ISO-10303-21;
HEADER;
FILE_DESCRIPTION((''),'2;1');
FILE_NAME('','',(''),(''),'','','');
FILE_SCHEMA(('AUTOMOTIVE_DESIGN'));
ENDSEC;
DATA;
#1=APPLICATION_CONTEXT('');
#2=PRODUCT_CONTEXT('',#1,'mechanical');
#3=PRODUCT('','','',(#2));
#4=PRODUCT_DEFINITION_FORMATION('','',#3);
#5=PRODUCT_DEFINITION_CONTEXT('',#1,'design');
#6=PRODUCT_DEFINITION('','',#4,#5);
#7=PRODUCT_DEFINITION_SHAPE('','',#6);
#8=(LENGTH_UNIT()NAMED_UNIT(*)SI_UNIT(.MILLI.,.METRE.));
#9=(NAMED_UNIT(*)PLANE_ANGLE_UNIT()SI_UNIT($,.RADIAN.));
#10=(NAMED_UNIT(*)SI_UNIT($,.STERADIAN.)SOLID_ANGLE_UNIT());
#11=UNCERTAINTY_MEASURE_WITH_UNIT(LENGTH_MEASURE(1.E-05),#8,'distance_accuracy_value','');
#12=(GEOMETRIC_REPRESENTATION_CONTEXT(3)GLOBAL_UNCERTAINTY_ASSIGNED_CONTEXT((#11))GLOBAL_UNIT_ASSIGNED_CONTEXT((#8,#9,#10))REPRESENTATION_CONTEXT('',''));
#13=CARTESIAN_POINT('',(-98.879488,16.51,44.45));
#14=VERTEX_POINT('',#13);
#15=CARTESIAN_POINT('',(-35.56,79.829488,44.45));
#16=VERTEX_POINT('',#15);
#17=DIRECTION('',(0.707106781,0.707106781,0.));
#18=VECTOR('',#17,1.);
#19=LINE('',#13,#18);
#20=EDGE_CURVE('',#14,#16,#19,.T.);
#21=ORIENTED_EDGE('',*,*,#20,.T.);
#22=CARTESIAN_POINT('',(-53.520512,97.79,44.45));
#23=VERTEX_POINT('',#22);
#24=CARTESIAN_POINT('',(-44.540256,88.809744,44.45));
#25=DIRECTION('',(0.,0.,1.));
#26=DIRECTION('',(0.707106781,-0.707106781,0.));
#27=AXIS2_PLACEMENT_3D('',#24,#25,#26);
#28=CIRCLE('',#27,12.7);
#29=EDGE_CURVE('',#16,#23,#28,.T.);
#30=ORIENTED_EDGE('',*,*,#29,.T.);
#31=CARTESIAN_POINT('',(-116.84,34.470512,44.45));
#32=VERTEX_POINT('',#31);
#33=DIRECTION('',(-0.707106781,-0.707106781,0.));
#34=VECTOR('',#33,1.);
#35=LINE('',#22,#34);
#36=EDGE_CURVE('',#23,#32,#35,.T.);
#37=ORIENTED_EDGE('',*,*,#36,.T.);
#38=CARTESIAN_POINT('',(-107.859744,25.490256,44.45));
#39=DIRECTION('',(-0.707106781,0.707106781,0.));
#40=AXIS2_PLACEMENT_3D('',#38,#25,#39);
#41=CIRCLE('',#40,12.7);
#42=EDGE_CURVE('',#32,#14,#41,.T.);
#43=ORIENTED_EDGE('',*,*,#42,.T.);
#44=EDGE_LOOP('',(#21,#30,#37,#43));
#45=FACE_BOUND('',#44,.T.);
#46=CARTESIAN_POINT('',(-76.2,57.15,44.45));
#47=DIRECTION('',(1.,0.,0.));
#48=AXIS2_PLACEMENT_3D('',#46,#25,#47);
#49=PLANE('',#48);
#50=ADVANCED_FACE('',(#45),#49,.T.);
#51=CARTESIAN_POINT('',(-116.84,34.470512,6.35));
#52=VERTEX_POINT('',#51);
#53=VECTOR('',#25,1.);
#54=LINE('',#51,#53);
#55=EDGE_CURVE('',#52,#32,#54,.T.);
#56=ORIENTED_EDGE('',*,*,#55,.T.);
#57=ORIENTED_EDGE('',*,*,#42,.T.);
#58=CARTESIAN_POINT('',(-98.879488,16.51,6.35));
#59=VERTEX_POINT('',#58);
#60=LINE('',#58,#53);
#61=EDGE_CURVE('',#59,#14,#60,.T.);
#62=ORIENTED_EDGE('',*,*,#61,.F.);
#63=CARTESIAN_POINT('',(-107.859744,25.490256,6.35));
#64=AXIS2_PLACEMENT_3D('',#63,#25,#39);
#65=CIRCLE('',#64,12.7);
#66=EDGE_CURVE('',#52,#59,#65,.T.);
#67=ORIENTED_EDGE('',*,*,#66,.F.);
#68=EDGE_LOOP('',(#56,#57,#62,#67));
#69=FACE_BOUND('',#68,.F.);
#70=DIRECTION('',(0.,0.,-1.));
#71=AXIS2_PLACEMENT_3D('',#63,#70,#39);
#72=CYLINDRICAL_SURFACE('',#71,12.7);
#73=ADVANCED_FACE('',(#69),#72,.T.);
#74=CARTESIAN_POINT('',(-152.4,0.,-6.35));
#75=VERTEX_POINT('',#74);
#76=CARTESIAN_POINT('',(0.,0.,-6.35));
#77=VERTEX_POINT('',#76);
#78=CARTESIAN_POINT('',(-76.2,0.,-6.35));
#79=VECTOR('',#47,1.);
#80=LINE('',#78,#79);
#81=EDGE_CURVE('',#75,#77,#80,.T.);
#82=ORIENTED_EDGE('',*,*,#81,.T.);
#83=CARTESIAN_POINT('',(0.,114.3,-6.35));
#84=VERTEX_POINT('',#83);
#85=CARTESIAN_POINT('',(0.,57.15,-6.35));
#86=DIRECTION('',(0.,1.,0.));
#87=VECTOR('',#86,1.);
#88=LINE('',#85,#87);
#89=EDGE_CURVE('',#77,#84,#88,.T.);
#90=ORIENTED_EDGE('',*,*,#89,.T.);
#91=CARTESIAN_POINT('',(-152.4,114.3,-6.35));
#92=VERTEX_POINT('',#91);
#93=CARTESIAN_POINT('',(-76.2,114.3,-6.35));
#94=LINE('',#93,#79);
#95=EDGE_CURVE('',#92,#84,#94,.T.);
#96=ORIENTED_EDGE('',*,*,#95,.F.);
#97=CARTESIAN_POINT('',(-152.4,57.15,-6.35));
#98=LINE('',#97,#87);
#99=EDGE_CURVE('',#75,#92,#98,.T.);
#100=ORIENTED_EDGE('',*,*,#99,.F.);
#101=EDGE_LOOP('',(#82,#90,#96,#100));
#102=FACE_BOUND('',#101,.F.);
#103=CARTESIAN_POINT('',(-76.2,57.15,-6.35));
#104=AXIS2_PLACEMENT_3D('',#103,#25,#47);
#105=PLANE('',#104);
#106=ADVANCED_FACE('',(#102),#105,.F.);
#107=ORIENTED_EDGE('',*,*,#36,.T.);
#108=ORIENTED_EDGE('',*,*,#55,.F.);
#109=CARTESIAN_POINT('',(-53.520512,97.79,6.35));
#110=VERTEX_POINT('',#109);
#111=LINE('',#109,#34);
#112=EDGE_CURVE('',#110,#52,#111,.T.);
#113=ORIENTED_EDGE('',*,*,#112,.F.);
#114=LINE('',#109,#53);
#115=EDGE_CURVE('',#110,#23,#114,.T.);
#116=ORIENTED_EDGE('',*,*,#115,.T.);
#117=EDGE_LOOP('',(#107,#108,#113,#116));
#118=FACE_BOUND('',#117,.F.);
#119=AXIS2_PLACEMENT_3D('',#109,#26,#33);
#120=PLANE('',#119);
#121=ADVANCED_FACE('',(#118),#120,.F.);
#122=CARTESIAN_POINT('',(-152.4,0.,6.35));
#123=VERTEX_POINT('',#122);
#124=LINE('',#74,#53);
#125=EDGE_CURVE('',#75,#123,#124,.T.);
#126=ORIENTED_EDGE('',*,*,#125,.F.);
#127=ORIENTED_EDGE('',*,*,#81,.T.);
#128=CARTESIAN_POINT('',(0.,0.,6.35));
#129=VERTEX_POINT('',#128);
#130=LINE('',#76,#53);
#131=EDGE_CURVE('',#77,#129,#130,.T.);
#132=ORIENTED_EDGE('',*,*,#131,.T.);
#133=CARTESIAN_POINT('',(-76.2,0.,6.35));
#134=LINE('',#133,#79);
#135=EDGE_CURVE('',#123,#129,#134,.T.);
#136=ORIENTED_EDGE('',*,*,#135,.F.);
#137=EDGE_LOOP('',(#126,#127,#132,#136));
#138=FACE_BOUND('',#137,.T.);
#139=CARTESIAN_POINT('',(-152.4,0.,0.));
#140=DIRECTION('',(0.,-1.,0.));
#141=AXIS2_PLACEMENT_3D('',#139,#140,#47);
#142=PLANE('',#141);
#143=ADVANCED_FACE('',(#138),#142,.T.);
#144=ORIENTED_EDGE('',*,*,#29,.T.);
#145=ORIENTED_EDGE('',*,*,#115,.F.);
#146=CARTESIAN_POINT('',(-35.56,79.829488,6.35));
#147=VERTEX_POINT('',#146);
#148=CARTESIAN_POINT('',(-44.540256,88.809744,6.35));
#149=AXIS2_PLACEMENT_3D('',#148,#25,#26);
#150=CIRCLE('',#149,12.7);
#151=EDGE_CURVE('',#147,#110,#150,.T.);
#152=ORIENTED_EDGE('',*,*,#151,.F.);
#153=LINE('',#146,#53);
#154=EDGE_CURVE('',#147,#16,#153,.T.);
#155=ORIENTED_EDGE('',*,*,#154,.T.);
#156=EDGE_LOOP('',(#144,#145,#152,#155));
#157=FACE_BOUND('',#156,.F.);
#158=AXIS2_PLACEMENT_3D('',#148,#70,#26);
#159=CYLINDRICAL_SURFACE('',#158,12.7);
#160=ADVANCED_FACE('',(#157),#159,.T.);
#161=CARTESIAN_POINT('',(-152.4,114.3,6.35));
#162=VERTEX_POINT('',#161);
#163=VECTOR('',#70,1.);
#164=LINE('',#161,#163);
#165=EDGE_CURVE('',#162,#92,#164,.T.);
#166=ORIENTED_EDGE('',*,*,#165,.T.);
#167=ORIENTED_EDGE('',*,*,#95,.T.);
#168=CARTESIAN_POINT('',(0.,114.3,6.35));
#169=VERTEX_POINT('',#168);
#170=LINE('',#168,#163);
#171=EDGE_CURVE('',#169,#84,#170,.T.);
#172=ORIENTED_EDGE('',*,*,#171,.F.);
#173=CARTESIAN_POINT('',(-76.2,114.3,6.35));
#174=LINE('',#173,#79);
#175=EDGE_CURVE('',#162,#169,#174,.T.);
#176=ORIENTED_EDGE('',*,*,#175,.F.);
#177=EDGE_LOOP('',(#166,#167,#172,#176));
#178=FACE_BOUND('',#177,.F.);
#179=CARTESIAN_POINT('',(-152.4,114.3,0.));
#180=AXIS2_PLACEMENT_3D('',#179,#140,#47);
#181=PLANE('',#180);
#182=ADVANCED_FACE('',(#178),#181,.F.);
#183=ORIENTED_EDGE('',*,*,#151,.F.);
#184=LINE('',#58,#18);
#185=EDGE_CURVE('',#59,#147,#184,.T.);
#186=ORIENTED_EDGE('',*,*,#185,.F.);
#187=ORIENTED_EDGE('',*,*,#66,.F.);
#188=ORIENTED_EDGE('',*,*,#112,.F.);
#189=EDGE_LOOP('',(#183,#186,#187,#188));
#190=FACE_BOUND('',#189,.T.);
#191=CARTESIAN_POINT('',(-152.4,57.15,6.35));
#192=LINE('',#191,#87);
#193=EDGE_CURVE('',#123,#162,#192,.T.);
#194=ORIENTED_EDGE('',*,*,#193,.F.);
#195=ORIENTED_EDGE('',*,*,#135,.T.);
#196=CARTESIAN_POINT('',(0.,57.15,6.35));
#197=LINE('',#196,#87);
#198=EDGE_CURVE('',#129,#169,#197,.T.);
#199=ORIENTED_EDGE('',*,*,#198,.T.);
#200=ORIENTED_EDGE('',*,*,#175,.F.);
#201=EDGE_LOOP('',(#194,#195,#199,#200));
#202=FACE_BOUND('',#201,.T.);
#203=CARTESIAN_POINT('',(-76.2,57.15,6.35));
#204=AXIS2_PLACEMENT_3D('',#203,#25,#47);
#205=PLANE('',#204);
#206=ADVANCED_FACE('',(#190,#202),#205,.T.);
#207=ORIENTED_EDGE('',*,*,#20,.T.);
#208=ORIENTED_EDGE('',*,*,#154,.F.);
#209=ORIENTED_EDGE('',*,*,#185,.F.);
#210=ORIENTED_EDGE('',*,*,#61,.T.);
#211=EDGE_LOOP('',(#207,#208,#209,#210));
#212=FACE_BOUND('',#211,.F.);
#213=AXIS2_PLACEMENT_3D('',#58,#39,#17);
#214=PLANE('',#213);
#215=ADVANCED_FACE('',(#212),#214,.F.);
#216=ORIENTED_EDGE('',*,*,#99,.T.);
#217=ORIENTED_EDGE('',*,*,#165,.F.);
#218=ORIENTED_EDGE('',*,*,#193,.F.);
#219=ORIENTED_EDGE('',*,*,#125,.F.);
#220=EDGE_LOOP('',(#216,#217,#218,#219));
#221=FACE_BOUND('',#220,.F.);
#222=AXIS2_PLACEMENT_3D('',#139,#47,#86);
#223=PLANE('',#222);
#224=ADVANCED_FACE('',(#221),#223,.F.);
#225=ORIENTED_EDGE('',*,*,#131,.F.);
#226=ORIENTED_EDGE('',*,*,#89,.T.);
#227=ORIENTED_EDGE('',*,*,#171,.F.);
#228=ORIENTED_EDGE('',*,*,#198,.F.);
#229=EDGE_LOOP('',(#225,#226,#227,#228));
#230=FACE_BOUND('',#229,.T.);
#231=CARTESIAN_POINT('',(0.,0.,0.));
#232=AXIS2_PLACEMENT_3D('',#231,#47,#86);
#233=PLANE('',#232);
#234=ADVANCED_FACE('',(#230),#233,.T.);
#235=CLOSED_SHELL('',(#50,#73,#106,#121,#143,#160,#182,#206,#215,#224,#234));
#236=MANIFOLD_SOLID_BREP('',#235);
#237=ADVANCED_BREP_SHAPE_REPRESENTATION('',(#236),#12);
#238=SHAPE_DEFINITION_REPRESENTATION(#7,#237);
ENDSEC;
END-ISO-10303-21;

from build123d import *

# Parameters (mm, degrees)
F0_W     = 152.4
F0_H     = 114.3
F1_DEPTH = 6.35
F3_DEPTH = 38.1


with BuildPart() as f1:
    # F0 (on Top) → F1 (new body, symmetric)
    with BuildSketch(Plane.XY):
        with Locations((-76.2, 57.15)):
            Rectangle(F0_W, F0_H)
    extrude(amount=F1_DEPTH, both=True)

    # F2 (on face) → F3 (join)
    with BuildSketch(Plane.XY.offset(6.35)):
        Polygon((-53.5205122421, 97.79), (-116.84, 34.4705122421), (-107.8597438789, 25.4902561211), (-98.8794877579, 16.51), (-35.56, 79.8294877579), (-44.5402561211, 88.8097438789), align=None)
        with BuildLine():
            Line((-107.8597438789, 25.4902561211), (-116.84, 34.4705122421))
            ThreePointArc((-116.84, 34.4705122421), (-116.84, 16.51), (-98.8794877579, 16.51))
            Line((-98.8794877579, 16.51), (-107.8597438789, 25.4902561211))
        make_face()
        with BuildLine():
            ThreePointArc((-35.56, 79.8294877579), (-35.56, 97.79), (-53.5205122421, 97.79))
            Line((-53.5205122421, 97.79), (-44.5402561211, 88.8097438789))
            Line((-44.5402561211, 88.8097438789), (-35.56, 79.8294877579))
        make_face()
    extrude(amount=F3_DEPTH)


solid = f1.part
